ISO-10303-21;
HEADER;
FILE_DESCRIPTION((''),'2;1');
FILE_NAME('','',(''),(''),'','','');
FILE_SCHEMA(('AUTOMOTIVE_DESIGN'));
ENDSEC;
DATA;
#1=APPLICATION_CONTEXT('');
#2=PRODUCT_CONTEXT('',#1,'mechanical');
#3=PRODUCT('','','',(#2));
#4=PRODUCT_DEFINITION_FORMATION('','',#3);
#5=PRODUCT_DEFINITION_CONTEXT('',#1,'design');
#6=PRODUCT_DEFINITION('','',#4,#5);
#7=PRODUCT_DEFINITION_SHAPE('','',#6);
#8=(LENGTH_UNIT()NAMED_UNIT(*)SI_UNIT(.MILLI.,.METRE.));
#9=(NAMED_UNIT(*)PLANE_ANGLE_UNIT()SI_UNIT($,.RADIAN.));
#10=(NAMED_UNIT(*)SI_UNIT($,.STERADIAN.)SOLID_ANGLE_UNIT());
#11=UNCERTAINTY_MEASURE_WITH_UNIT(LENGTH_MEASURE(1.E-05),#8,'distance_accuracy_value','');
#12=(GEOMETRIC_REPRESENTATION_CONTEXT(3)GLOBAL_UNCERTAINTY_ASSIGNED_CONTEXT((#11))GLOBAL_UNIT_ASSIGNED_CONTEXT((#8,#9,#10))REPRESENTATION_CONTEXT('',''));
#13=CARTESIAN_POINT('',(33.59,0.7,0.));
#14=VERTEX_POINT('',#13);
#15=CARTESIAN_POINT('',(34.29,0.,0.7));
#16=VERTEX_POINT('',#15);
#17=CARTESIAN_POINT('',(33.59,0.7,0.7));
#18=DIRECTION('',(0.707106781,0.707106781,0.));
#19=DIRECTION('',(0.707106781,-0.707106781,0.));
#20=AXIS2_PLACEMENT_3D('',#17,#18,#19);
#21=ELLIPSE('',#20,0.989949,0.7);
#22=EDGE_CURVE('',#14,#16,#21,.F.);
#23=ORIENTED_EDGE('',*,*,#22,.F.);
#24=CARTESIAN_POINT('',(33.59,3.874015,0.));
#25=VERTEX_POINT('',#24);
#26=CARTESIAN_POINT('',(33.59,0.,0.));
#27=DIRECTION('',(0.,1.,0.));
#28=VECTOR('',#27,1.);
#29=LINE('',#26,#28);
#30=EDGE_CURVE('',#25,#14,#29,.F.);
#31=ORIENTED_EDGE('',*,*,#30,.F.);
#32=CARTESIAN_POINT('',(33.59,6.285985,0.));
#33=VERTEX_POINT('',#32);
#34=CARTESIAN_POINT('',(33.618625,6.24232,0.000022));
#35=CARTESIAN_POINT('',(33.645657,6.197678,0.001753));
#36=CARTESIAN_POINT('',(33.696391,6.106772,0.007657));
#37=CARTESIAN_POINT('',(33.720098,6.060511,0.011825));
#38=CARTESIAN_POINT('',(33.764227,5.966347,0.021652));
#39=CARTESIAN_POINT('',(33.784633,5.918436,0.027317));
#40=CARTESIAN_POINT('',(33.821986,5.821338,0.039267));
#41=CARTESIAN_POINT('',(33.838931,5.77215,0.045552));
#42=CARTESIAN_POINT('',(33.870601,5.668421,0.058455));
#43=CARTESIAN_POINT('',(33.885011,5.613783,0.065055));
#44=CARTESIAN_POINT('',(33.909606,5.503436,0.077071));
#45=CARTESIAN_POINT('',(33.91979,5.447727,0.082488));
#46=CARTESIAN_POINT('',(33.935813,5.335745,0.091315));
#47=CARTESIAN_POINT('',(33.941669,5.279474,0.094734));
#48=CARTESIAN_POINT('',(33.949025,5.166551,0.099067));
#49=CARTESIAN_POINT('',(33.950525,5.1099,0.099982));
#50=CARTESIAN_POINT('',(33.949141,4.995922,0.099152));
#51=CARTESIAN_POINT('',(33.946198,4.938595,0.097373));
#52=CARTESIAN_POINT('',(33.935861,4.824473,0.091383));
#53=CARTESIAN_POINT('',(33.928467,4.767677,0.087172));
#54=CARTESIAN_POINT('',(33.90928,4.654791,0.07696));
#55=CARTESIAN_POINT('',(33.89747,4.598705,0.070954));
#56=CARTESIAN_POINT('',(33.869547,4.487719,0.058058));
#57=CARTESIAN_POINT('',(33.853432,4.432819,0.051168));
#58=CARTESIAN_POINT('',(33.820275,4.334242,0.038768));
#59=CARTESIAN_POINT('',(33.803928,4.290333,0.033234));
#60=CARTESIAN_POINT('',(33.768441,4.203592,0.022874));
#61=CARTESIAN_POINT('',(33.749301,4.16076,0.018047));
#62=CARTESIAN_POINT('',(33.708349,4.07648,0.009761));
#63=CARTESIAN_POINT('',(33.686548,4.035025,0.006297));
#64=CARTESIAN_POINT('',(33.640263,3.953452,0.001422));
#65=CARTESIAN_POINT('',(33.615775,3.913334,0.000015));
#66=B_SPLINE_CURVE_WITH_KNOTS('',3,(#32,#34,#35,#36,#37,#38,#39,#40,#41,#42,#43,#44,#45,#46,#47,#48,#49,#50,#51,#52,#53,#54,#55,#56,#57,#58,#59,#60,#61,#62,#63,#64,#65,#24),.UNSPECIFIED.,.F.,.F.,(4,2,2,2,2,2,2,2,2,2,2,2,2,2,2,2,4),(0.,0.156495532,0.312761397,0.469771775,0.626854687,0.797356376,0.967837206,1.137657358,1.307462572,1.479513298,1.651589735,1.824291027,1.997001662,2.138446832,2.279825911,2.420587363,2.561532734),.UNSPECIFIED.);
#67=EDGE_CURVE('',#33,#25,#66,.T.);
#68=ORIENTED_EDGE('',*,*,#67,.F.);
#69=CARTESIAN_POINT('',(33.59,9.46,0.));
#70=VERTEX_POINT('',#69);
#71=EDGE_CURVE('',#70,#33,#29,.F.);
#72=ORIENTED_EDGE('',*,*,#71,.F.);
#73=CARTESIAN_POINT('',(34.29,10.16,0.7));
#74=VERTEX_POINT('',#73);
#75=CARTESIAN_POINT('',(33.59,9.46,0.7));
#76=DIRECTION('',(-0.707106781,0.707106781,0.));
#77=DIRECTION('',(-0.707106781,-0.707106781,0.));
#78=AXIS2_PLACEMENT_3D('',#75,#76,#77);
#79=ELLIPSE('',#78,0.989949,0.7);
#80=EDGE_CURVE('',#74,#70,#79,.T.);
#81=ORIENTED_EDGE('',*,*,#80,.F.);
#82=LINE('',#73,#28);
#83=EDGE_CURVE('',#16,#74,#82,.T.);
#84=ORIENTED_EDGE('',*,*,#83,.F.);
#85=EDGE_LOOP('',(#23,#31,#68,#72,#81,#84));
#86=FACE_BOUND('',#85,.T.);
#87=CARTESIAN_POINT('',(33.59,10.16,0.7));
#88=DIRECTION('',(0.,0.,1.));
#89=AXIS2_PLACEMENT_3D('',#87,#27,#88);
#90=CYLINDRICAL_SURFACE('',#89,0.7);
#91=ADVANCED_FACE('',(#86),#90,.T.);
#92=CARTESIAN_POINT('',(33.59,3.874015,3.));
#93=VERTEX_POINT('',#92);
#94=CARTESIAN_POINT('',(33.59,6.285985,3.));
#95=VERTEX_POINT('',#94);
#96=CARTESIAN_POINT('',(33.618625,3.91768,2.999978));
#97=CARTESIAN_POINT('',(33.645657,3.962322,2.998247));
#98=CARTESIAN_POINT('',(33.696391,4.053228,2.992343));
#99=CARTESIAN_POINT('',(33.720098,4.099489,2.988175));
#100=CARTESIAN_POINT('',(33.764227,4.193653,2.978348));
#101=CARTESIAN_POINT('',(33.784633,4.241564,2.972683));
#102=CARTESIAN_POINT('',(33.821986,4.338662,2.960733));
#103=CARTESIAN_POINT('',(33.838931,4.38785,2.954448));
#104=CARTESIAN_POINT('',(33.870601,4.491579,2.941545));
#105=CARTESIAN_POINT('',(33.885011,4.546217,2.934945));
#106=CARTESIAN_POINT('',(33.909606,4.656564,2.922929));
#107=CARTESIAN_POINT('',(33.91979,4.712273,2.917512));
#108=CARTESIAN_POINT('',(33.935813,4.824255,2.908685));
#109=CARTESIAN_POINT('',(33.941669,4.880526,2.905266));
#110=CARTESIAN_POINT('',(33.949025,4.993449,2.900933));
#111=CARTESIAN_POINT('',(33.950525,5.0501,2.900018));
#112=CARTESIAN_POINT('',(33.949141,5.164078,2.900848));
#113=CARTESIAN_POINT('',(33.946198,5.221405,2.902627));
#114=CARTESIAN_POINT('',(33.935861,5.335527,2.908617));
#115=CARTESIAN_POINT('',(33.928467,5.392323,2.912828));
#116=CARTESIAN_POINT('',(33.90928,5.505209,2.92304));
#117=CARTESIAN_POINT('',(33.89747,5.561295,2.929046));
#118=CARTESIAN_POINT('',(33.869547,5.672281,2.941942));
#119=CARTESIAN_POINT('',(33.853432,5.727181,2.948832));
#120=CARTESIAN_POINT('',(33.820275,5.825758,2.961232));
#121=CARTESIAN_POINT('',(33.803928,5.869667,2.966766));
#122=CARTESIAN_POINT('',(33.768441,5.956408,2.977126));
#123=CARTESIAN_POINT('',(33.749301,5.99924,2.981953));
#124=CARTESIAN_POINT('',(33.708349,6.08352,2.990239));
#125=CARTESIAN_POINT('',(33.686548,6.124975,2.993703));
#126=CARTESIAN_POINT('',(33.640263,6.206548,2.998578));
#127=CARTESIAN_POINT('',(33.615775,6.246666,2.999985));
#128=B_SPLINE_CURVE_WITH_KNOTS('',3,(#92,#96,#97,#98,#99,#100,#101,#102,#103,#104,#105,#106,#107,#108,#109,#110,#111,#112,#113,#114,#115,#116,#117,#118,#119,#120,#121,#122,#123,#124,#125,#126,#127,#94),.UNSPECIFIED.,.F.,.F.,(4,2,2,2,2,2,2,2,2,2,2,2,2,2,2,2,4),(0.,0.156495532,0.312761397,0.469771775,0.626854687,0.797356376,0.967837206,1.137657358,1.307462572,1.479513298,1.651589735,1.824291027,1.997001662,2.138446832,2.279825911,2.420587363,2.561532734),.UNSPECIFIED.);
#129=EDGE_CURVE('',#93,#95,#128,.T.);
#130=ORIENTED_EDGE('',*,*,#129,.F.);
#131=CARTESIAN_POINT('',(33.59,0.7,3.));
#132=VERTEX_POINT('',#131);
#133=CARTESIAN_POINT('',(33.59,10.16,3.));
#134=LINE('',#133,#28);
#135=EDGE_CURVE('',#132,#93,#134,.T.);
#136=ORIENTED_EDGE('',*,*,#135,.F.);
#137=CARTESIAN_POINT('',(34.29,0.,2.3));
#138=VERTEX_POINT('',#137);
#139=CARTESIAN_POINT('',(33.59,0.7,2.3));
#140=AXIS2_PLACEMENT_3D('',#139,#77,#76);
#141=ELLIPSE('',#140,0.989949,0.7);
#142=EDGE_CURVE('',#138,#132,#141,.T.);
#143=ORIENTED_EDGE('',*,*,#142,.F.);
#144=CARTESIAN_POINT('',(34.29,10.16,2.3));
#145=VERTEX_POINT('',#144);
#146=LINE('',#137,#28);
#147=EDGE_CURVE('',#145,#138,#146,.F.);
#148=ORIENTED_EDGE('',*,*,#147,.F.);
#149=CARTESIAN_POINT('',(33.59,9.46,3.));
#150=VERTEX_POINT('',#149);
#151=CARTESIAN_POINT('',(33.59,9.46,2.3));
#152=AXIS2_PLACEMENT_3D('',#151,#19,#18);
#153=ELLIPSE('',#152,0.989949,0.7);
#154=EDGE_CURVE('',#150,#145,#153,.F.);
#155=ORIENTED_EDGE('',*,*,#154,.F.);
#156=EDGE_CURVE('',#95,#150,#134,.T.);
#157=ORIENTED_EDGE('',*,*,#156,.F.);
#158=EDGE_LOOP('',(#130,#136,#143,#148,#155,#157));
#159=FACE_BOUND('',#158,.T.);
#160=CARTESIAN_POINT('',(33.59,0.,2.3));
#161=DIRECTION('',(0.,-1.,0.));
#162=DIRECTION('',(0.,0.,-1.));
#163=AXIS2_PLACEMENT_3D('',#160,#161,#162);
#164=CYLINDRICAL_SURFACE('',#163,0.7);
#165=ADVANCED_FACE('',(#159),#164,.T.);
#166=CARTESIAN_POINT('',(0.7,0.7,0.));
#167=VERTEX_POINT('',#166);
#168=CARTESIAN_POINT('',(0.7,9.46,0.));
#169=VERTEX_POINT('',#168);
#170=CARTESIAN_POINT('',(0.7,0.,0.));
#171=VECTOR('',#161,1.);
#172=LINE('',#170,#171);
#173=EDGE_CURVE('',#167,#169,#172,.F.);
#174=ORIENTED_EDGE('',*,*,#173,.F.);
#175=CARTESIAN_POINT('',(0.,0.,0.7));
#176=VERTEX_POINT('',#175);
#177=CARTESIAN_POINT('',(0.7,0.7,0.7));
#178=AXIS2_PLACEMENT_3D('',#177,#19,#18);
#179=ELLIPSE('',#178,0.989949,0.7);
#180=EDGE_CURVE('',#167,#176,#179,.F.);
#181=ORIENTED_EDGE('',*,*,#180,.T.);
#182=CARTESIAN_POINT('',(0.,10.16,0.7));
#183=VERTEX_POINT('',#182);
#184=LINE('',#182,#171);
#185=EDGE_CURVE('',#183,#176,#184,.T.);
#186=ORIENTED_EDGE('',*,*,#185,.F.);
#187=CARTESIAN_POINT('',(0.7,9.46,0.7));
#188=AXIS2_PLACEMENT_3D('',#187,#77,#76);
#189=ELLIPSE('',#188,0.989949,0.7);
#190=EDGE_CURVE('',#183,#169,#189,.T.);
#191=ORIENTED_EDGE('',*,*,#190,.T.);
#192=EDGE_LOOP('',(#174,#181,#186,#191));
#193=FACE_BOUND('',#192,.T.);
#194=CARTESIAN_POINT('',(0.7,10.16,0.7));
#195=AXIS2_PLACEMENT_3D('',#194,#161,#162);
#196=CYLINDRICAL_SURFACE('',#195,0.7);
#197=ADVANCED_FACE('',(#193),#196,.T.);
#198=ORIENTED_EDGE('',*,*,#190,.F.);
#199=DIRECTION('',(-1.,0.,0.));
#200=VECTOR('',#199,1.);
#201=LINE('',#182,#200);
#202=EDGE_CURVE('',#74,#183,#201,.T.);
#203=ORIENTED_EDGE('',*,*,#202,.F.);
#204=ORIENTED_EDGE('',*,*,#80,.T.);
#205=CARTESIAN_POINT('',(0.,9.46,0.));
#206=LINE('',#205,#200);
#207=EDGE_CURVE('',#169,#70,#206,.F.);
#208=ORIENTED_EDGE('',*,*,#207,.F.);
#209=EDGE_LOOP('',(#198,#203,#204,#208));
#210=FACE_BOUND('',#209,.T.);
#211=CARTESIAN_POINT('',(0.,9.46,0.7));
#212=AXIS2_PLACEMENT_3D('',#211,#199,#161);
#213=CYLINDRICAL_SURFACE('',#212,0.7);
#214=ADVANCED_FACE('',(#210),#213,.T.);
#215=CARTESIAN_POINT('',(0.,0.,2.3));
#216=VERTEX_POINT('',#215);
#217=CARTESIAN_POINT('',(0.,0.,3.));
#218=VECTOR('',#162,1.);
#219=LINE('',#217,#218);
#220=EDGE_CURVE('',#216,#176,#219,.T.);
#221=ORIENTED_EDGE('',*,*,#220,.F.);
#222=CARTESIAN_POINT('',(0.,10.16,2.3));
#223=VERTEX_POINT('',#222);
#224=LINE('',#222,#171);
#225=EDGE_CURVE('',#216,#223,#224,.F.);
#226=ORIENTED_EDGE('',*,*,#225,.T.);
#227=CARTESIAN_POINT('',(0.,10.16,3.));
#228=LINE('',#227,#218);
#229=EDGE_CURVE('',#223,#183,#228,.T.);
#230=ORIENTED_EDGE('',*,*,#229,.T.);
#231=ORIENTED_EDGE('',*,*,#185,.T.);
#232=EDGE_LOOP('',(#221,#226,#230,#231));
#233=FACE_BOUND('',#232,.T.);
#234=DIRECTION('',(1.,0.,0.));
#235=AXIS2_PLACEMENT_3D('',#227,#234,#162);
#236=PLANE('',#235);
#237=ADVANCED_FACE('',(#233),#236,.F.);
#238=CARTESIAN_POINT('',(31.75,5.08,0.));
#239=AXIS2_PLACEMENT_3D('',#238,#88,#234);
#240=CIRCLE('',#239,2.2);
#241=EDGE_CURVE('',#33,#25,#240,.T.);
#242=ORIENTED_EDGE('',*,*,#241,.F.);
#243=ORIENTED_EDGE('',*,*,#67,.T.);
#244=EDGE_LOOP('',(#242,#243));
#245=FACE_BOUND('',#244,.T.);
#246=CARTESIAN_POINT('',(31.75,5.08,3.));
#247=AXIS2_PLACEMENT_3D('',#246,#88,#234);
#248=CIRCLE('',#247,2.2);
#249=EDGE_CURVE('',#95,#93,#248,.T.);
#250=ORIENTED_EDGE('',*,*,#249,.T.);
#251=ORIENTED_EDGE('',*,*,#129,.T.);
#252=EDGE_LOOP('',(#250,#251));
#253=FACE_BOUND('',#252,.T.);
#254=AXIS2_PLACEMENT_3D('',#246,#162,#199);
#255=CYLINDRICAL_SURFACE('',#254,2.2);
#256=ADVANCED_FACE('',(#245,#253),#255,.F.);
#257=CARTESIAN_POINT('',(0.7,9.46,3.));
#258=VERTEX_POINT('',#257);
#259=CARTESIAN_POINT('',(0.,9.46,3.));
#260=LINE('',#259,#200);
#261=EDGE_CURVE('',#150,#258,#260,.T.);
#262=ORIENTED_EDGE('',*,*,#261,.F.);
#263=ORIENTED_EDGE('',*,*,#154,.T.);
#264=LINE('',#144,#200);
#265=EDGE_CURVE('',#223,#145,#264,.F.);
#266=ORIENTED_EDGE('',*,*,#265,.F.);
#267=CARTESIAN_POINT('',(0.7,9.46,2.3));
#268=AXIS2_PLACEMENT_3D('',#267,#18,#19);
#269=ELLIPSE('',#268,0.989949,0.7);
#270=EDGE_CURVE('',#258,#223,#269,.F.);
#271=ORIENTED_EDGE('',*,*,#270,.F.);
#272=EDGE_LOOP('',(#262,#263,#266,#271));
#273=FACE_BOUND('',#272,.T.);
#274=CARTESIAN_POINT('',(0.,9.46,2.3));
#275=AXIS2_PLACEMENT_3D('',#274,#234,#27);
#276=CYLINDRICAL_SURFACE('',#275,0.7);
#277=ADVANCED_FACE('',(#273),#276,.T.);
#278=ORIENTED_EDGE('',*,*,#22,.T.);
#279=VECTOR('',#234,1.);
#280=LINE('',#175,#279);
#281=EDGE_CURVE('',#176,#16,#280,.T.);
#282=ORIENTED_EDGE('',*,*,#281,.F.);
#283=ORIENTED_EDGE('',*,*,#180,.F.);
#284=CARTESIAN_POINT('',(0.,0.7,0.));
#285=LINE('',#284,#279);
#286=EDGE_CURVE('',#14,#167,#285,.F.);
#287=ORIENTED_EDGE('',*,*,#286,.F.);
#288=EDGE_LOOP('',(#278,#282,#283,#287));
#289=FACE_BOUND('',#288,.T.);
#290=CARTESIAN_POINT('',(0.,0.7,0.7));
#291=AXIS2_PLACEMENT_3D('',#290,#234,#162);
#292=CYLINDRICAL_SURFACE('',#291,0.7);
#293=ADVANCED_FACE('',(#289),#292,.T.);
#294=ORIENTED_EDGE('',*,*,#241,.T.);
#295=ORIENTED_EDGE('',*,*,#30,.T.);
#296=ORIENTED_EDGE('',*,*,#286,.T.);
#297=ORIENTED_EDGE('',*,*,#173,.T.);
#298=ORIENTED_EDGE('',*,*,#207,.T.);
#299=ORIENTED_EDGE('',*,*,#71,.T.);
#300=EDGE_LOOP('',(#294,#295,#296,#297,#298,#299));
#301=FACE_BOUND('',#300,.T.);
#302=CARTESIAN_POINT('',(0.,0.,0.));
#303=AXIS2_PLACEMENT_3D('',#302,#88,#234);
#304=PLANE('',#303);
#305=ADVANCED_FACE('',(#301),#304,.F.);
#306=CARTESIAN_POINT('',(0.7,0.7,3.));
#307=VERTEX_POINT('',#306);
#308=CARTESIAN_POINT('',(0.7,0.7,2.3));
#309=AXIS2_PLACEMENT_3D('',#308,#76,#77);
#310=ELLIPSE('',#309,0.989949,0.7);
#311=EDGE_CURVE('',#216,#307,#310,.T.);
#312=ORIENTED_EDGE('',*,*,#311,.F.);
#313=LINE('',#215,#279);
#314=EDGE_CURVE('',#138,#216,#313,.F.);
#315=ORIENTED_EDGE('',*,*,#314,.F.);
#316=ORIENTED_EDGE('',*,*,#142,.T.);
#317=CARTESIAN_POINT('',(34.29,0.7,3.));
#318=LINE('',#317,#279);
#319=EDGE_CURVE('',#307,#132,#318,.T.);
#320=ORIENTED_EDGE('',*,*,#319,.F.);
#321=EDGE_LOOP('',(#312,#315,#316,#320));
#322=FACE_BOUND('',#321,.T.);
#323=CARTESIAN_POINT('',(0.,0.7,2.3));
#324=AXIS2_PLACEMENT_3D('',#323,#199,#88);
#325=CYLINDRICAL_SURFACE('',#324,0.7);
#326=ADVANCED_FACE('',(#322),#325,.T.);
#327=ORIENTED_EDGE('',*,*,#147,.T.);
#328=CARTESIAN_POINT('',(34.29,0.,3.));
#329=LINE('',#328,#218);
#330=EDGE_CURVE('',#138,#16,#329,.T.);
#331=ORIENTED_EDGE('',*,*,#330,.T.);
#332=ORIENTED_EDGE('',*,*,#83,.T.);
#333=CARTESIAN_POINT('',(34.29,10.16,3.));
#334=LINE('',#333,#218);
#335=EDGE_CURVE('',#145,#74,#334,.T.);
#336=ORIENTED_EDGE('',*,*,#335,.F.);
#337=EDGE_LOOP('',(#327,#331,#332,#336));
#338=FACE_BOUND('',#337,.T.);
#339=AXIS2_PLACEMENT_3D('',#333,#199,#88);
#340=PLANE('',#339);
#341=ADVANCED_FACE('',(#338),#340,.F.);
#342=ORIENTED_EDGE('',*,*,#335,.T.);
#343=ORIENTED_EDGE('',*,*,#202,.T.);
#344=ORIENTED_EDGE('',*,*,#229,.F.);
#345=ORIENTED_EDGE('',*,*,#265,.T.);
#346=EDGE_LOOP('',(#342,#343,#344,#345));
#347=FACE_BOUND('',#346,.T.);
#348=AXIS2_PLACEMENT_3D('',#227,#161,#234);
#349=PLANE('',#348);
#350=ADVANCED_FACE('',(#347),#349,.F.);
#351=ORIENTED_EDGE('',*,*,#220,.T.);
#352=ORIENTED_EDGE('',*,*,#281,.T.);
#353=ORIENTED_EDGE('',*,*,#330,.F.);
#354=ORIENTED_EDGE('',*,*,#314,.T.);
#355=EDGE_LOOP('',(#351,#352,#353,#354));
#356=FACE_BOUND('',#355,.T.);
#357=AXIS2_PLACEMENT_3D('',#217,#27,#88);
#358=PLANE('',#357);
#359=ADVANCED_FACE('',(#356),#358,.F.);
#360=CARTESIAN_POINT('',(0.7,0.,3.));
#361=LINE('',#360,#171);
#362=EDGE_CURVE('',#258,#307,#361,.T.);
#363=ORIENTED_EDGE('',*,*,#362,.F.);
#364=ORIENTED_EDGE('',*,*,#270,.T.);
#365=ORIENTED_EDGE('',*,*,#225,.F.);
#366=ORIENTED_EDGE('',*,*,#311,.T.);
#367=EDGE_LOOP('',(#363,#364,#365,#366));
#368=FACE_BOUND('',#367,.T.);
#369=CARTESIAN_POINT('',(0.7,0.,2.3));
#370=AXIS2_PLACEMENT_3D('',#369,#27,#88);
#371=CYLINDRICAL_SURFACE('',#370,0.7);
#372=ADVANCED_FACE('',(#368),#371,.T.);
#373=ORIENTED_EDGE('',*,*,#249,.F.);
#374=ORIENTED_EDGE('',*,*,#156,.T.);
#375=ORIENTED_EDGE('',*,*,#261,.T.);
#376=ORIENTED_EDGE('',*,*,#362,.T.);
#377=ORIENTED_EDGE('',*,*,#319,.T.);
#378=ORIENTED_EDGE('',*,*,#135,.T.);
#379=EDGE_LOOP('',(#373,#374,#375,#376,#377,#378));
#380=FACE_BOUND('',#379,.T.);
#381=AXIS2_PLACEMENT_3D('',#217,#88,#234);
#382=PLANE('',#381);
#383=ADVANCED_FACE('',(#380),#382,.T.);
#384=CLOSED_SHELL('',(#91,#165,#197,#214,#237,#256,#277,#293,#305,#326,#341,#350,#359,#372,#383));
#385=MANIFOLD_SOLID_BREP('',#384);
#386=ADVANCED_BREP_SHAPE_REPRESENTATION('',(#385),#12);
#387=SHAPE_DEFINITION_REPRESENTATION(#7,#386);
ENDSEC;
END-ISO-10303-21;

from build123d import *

# Parameters (mm, degrees)
SKETCH1_W           = 34.29
SKETCH1_H           = 10.16
SKETCH1_R           = 2.2
BOSS_EXTRUDE1_DEPTH = 3
FILLET1_R           = 0.7


with BuildPart() as part:
    # Sketch1 → Boss-Extrude1 (new body)
    with BuildSketch(Plane.XY):
        with Locations((17.145, 5.08)):
            Rectangle(SKETCH1_W, SKETCH1_H)
        with Locations((31.75, 5.08)):
            Circle(SKETCH1_R, mode=Mode.SUBTRACT)
    extrude(amount=BOSS_EXTRUDE1_DEPTH)

    # Fillet1
    # the kernel refuses this fillet: 0.7 mm, written as the material it takes off along each edge
    with BuildSketch(Plane(origin=(34.29, 11.91, 3), x_dir=(0, 0, -1), z_dir=(0, -1, 0)), Plane(origin=(0, -1.75, 3), x_dir=(0, 0, -1), z_dir=(0, 1, 0))) as fillet1_piece_1:
        with BuildLine():
            CenterArc((FILLET1_R, -FILLET1_R), FILLET1_R, 90, 90)
            Line((0, -FILLET1_R), (0, 0))
            Line((0, 0), (FILLET1_R, 0))
        make_face()
    extrude(amount=13.66, mode=Mode.SUBTRACT)
    with BuildSketch(Plane(origin=(-1.75, 10.16, 3), x_dir=(0, 0, -1), z_dir=(1, 0, 0)), Plane(origin=(36.04, 0, 3), x_dir=(0, 0, -1), z_dir=(-1, 0, 0))) as fillet1_piece_2:
        with BuildLine():
            CenterArc((FILLET1_R, -FILLET1_R), FILLET1_R, 90, 90)
            Line((0, -FILLET1_R), (0, 0))
            Line((0, 0), (FILLET1_R, 0))
        make_face()
    extrude(amount=37.79, mode=Mode.SUBTRACT)
    with BuildSketch(Plane(origin=(-1.75, 10.16, 0), x_dir=(0, 0, 1), z_dir=(1, 0, 0)), Plane(origin=(36.04, 0, 0), x_dir=(0, 0, 1), z_dir=(-1, 0, 0))) as fillet1_piece_3:
        with BuildLine():
            CenterArc((FILLET1_R, FILLET1_R), FILLET1_R, 180, 90)
            Line((0, FILLET1_R), (0, 0))
            Line((0, 0), (FILLET1_R, 0))
        make_face()
    extrude(amount=37.79, mode=Mode.SUBTRACT)
    with BuildSketch(Plane(origin=(34.29, 11.91, 0), x_dir=(0, 0, 1), z_dir=(0, -1, 0)), Plane(origin=(0, -1.75, 0), x_dir=(0, 0, 1), z_dir=(0, 1, 0))) as fillet1_piece_4:
        with BuildLine():
            CenterArc((FILLET1_R, FILLET1_R), FILLET1_R, 180, 90)
            Line((0, FILLET1_R), (0, 0))
            Line((0, 0), (FILLET1_R, 0))
        make_face()
    extrude(amount=13.66, mode=Mode.SUBTRACT)


solid = part.part
